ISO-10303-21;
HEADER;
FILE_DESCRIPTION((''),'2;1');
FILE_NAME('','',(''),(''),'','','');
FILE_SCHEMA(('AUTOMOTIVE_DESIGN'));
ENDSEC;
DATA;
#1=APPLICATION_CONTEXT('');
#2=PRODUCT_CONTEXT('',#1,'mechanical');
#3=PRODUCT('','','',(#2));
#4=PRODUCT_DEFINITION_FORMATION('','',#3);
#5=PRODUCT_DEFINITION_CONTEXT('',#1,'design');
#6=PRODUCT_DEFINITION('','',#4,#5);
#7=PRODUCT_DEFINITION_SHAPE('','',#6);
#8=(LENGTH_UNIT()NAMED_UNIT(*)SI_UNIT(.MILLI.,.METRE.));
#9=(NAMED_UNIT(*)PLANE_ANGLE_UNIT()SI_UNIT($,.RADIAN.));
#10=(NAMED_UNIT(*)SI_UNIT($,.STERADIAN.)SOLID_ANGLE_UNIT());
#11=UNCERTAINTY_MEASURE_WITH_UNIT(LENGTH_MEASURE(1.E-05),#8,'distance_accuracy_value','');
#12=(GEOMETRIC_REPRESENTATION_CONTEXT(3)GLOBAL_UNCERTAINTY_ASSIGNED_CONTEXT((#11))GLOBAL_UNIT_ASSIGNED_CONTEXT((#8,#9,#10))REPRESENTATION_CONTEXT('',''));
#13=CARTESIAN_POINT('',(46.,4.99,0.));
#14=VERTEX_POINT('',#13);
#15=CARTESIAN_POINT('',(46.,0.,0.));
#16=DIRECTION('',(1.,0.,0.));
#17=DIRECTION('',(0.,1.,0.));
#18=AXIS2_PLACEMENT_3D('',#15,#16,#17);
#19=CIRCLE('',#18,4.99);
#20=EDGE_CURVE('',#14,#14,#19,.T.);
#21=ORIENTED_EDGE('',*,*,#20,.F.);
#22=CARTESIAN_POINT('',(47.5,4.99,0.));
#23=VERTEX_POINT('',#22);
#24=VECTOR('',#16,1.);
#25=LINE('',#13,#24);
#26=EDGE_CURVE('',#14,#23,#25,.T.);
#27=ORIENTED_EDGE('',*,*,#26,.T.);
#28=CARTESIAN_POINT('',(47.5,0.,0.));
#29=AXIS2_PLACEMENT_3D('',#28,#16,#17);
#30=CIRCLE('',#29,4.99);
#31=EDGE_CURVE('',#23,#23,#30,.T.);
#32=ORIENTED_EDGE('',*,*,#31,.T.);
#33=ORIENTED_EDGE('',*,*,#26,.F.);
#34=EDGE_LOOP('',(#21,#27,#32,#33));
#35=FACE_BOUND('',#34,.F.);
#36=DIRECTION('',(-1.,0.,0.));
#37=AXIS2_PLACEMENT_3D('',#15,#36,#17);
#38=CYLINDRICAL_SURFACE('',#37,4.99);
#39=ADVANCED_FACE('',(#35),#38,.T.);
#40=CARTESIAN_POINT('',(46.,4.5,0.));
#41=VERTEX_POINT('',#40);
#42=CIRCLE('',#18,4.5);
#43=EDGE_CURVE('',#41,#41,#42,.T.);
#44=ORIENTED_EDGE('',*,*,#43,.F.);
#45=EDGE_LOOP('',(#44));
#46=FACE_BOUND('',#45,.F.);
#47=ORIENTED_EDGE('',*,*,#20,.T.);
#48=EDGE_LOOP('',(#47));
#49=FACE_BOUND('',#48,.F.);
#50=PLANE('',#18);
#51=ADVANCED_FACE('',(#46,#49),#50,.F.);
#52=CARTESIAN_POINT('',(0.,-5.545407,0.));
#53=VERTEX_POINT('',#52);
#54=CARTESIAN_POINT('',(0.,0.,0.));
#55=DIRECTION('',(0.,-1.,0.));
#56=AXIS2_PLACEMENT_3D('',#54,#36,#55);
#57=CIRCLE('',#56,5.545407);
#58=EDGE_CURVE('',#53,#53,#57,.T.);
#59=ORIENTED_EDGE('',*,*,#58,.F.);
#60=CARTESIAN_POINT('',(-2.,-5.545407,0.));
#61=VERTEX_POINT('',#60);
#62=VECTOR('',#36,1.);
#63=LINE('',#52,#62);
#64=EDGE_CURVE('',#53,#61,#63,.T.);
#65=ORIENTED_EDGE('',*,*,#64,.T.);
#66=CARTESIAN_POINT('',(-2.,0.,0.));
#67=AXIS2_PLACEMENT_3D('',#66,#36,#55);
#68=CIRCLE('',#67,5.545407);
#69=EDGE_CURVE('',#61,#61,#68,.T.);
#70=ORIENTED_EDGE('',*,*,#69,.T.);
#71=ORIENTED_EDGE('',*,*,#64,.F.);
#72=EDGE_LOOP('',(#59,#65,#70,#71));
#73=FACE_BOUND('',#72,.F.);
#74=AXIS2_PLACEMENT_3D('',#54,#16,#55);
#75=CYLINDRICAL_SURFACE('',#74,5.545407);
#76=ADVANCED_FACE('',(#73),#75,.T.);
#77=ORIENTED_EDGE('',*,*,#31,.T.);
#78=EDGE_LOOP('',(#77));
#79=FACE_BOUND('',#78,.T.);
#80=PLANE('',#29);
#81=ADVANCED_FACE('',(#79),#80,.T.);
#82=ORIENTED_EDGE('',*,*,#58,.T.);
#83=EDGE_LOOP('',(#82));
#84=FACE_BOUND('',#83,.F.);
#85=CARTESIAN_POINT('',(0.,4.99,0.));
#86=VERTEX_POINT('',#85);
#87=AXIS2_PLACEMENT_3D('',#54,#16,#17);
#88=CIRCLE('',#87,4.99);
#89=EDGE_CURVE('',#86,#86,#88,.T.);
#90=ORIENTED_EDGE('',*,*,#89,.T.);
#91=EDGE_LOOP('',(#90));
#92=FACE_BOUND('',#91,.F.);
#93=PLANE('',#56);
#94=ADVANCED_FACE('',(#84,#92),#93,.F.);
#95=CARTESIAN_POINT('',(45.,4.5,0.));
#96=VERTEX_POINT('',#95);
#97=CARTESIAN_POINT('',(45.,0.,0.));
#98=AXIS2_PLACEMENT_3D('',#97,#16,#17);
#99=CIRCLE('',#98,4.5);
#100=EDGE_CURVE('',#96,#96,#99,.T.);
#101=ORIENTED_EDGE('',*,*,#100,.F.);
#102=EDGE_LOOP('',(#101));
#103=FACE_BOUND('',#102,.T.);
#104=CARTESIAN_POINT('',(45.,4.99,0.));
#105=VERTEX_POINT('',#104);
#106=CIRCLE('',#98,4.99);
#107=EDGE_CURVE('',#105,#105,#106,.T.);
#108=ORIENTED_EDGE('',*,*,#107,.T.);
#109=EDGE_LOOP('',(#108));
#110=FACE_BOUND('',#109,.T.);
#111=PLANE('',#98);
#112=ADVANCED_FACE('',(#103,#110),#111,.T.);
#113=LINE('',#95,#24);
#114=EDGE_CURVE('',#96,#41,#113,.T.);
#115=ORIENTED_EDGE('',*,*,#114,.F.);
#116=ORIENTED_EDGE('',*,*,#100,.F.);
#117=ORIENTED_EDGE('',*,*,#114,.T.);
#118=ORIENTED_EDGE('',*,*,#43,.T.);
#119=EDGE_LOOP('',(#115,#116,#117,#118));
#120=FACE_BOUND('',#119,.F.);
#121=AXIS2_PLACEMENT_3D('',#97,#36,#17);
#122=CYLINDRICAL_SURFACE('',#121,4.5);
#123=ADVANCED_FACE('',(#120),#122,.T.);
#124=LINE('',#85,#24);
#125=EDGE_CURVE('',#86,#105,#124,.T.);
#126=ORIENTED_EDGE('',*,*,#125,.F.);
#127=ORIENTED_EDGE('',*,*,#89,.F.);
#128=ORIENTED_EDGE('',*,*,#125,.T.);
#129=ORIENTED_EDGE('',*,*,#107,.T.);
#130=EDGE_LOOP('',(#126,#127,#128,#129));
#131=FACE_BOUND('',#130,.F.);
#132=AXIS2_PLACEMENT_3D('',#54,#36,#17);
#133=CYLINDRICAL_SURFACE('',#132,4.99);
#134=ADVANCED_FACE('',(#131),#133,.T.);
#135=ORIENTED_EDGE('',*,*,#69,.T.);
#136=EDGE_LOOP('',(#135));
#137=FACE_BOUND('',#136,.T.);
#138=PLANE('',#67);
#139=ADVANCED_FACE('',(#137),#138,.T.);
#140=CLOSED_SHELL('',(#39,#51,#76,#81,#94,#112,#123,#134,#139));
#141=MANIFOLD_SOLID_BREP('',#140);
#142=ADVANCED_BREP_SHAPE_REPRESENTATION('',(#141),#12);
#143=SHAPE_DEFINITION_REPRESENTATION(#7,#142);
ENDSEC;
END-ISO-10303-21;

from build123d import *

# Parameters (mm, degrees)
F0_R     = 4.99
F1_DEPTH = 45
F2_R     = 5.5454073787
F2_R_2   = 4.99
F3_DEPTH = 2
F4_R     = 4.5
F5_DEPTH = 1
F6_R     = 4.99
F6_R_2   = 4.5
F7_DEPTH = 1.5


with BuildPart() as f1:
    # F0 (on Right) → F1 (new body)
    with BuildSketch(Plane.YZ):
        Circle(F0_R)
    extrude(amount=F1_DEPTH)

    # F2 (on face) → F3 (join)
    with BuildSketch(Plane(origin=(0, 0, 0), x_dir=(0, -1, 0), z_dir=(-1, 0, 0))):
        Circle(F2_R)
        Circle(F2_R_2, mode=Mode.SUBTRACT)
        Circle(F2_R_2)
    extrude(amount=F3_DEPTH)

    # F4 (on face) → F5 (join)
    with BuildSketch(Plane.YZ.offset(45)):
        Circle(F4_R)
    extrude(amount=F5_DEPTH)

    # F6 (on face) → F7 (join)
    with BuildSketch(Plane.YZ.offset(46)):
        Circle(F6_R)
        Circle(F6_R_2, mode=Mode.SUBTRACT)
        Circle(F6_R_2)
    extrude(amount=F7_DEPTH)


solid = f1.part
